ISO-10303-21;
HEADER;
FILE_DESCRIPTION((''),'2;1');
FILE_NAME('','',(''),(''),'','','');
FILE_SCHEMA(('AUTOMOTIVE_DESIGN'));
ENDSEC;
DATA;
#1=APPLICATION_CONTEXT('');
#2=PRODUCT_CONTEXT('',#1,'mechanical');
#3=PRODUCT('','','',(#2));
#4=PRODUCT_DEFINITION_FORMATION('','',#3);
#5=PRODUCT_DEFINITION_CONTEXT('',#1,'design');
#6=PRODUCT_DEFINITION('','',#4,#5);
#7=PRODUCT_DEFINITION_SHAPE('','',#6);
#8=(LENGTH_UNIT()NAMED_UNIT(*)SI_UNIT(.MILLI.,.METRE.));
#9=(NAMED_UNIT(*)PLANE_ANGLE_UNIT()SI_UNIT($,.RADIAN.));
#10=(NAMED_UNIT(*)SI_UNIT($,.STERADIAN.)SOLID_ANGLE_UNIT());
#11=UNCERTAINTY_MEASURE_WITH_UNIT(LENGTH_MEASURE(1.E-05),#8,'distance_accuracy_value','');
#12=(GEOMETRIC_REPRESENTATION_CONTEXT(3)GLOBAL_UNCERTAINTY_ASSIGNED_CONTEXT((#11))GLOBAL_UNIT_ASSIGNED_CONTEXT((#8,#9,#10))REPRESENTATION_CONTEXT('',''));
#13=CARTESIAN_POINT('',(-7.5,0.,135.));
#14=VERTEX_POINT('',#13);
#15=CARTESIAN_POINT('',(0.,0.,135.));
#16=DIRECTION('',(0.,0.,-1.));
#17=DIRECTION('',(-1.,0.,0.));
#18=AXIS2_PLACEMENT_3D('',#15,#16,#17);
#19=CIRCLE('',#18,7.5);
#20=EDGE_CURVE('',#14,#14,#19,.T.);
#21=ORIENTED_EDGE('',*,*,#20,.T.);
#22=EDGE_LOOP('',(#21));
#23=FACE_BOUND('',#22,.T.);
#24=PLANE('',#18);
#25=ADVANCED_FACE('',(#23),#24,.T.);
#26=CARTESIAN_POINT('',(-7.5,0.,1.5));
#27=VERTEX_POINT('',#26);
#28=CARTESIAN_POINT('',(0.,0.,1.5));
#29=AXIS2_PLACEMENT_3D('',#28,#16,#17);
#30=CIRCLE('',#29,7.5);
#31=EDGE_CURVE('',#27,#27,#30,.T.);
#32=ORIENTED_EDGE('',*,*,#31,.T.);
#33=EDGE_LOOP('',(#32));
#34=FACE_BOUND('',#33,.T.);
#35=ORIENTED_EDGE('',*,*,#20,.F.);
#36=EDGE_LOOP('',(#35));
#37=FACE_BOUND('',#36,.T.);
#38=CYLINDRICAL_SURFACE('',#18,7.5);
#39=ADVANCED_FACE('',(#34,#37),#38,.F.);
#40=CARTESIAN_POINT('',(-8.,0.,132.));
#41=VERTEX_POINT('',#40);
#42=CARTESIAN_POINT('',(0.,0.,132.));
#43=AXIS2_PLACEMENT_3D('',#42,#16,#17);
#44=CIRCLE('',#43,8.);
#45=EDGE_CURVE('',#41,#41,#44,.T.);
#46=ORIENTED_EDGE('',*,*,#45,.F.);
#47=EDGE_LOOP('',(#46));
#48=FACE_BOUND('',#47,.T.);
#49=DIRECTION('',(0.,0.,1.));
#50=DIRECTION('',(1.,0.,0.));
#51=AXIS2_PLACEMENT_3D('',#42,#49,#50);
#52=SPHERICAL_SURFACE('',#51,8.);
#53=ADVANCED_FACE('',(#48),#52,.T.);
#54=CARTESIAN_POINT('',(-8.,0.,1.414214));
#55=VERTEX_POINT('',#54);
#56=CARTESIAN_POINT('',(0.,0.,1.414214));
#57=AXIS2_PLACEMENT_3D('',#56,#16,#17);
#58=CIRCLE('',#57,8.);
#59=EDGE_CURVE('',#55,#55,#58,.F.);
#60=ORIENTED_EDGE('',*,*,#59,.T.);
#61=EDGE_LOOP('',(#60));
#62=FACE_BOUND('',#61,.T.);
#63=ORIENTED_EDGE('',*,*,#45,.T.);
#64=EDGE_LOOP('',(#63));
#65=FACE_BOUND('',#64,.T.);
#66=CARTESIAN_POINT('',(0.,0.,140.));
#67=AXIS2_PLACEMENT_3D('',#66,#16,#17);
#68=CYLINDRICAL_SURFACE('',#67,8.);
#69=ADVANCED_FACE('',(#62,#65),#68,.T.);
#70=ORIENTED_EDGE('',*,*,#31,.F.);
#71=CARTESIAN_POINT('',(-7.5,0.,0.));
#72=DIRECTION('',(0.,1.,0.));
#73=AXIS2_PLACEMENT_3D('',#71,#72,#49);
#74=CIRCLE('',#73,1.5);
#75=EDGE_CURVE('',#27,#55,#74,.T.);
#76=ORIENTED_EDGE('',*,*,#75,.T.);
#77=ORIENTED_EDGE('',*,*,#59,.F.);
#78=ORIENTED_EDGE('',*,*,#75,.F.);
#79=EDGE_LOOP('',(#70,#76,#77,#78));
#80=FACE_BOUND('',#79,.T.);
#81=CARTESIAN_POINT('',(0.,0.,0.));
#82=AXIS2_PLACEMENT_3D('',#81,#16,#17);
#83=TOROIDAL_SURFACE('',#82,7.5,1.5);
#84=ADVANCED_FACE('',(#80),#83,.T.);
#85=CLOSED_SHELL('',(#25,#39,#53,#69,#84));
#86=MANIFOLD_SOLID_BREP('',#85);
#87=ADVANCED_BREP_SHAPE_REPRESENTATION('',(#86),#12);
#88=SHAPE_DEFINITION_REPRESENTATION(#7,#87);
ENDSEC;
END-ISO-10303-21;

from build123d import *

# Parameters (mm, degrees)
SKETCH40_R          = 8
BOSS_EXTRUDE4_DEPTH = 140
SKETCH41_R          = 7.5
CUT_EXTRUDE3_DEPTH  = 135
FILLET5_R           = 8


# Read off the part's stored shape, not the designer's step: Sweep3
with BuildPart() as part:
    # Sketch40 → Boss-Extrude4 (new body)
    with BuildSketch(Plane.XY):
        Circle(SKETCH40_R)
    extrude(amount=BOSS_EXTRUDE4_DEPTH)

    # Sketch41 → Cut-Extrude3 (cut)
    with BuildSketch(Plane(origin=(0, 0, 0), x_dir=(-1, 0, 0), z_dir=(0, 0, -1))):
        Circle(SKETCH41_R)
    extrude(amount=-CUT_EXTRUDE3_DEPTH, mode=Mode.SUBTRACT)

    # Sweep3 outline → Sweep3 (revolve)
    with BuildSketch(Plane.XZ):
        with BuildLine():
            Line((8, 1.414213562), (8, 0))
            Line((8, 0), (7.5, 0))
            Line((7.5, 0), (7.5, 1.5))
            ThreePointArc((7.5, 1.5), (7.24634703, -1.478397839), (8, 1.414213562))
        make_face()
    revolve(axis=Axis((0, 0, 0), (0, 0, 1)))

    # Fillet5
    fillet5_edges = [part.edges().sort_by_distance(p)[0] for p in [
        (-8, 0, 140),
    ]]
    fillet(fillet5_edges, radius=FILLET5_R)


solid = part.part
